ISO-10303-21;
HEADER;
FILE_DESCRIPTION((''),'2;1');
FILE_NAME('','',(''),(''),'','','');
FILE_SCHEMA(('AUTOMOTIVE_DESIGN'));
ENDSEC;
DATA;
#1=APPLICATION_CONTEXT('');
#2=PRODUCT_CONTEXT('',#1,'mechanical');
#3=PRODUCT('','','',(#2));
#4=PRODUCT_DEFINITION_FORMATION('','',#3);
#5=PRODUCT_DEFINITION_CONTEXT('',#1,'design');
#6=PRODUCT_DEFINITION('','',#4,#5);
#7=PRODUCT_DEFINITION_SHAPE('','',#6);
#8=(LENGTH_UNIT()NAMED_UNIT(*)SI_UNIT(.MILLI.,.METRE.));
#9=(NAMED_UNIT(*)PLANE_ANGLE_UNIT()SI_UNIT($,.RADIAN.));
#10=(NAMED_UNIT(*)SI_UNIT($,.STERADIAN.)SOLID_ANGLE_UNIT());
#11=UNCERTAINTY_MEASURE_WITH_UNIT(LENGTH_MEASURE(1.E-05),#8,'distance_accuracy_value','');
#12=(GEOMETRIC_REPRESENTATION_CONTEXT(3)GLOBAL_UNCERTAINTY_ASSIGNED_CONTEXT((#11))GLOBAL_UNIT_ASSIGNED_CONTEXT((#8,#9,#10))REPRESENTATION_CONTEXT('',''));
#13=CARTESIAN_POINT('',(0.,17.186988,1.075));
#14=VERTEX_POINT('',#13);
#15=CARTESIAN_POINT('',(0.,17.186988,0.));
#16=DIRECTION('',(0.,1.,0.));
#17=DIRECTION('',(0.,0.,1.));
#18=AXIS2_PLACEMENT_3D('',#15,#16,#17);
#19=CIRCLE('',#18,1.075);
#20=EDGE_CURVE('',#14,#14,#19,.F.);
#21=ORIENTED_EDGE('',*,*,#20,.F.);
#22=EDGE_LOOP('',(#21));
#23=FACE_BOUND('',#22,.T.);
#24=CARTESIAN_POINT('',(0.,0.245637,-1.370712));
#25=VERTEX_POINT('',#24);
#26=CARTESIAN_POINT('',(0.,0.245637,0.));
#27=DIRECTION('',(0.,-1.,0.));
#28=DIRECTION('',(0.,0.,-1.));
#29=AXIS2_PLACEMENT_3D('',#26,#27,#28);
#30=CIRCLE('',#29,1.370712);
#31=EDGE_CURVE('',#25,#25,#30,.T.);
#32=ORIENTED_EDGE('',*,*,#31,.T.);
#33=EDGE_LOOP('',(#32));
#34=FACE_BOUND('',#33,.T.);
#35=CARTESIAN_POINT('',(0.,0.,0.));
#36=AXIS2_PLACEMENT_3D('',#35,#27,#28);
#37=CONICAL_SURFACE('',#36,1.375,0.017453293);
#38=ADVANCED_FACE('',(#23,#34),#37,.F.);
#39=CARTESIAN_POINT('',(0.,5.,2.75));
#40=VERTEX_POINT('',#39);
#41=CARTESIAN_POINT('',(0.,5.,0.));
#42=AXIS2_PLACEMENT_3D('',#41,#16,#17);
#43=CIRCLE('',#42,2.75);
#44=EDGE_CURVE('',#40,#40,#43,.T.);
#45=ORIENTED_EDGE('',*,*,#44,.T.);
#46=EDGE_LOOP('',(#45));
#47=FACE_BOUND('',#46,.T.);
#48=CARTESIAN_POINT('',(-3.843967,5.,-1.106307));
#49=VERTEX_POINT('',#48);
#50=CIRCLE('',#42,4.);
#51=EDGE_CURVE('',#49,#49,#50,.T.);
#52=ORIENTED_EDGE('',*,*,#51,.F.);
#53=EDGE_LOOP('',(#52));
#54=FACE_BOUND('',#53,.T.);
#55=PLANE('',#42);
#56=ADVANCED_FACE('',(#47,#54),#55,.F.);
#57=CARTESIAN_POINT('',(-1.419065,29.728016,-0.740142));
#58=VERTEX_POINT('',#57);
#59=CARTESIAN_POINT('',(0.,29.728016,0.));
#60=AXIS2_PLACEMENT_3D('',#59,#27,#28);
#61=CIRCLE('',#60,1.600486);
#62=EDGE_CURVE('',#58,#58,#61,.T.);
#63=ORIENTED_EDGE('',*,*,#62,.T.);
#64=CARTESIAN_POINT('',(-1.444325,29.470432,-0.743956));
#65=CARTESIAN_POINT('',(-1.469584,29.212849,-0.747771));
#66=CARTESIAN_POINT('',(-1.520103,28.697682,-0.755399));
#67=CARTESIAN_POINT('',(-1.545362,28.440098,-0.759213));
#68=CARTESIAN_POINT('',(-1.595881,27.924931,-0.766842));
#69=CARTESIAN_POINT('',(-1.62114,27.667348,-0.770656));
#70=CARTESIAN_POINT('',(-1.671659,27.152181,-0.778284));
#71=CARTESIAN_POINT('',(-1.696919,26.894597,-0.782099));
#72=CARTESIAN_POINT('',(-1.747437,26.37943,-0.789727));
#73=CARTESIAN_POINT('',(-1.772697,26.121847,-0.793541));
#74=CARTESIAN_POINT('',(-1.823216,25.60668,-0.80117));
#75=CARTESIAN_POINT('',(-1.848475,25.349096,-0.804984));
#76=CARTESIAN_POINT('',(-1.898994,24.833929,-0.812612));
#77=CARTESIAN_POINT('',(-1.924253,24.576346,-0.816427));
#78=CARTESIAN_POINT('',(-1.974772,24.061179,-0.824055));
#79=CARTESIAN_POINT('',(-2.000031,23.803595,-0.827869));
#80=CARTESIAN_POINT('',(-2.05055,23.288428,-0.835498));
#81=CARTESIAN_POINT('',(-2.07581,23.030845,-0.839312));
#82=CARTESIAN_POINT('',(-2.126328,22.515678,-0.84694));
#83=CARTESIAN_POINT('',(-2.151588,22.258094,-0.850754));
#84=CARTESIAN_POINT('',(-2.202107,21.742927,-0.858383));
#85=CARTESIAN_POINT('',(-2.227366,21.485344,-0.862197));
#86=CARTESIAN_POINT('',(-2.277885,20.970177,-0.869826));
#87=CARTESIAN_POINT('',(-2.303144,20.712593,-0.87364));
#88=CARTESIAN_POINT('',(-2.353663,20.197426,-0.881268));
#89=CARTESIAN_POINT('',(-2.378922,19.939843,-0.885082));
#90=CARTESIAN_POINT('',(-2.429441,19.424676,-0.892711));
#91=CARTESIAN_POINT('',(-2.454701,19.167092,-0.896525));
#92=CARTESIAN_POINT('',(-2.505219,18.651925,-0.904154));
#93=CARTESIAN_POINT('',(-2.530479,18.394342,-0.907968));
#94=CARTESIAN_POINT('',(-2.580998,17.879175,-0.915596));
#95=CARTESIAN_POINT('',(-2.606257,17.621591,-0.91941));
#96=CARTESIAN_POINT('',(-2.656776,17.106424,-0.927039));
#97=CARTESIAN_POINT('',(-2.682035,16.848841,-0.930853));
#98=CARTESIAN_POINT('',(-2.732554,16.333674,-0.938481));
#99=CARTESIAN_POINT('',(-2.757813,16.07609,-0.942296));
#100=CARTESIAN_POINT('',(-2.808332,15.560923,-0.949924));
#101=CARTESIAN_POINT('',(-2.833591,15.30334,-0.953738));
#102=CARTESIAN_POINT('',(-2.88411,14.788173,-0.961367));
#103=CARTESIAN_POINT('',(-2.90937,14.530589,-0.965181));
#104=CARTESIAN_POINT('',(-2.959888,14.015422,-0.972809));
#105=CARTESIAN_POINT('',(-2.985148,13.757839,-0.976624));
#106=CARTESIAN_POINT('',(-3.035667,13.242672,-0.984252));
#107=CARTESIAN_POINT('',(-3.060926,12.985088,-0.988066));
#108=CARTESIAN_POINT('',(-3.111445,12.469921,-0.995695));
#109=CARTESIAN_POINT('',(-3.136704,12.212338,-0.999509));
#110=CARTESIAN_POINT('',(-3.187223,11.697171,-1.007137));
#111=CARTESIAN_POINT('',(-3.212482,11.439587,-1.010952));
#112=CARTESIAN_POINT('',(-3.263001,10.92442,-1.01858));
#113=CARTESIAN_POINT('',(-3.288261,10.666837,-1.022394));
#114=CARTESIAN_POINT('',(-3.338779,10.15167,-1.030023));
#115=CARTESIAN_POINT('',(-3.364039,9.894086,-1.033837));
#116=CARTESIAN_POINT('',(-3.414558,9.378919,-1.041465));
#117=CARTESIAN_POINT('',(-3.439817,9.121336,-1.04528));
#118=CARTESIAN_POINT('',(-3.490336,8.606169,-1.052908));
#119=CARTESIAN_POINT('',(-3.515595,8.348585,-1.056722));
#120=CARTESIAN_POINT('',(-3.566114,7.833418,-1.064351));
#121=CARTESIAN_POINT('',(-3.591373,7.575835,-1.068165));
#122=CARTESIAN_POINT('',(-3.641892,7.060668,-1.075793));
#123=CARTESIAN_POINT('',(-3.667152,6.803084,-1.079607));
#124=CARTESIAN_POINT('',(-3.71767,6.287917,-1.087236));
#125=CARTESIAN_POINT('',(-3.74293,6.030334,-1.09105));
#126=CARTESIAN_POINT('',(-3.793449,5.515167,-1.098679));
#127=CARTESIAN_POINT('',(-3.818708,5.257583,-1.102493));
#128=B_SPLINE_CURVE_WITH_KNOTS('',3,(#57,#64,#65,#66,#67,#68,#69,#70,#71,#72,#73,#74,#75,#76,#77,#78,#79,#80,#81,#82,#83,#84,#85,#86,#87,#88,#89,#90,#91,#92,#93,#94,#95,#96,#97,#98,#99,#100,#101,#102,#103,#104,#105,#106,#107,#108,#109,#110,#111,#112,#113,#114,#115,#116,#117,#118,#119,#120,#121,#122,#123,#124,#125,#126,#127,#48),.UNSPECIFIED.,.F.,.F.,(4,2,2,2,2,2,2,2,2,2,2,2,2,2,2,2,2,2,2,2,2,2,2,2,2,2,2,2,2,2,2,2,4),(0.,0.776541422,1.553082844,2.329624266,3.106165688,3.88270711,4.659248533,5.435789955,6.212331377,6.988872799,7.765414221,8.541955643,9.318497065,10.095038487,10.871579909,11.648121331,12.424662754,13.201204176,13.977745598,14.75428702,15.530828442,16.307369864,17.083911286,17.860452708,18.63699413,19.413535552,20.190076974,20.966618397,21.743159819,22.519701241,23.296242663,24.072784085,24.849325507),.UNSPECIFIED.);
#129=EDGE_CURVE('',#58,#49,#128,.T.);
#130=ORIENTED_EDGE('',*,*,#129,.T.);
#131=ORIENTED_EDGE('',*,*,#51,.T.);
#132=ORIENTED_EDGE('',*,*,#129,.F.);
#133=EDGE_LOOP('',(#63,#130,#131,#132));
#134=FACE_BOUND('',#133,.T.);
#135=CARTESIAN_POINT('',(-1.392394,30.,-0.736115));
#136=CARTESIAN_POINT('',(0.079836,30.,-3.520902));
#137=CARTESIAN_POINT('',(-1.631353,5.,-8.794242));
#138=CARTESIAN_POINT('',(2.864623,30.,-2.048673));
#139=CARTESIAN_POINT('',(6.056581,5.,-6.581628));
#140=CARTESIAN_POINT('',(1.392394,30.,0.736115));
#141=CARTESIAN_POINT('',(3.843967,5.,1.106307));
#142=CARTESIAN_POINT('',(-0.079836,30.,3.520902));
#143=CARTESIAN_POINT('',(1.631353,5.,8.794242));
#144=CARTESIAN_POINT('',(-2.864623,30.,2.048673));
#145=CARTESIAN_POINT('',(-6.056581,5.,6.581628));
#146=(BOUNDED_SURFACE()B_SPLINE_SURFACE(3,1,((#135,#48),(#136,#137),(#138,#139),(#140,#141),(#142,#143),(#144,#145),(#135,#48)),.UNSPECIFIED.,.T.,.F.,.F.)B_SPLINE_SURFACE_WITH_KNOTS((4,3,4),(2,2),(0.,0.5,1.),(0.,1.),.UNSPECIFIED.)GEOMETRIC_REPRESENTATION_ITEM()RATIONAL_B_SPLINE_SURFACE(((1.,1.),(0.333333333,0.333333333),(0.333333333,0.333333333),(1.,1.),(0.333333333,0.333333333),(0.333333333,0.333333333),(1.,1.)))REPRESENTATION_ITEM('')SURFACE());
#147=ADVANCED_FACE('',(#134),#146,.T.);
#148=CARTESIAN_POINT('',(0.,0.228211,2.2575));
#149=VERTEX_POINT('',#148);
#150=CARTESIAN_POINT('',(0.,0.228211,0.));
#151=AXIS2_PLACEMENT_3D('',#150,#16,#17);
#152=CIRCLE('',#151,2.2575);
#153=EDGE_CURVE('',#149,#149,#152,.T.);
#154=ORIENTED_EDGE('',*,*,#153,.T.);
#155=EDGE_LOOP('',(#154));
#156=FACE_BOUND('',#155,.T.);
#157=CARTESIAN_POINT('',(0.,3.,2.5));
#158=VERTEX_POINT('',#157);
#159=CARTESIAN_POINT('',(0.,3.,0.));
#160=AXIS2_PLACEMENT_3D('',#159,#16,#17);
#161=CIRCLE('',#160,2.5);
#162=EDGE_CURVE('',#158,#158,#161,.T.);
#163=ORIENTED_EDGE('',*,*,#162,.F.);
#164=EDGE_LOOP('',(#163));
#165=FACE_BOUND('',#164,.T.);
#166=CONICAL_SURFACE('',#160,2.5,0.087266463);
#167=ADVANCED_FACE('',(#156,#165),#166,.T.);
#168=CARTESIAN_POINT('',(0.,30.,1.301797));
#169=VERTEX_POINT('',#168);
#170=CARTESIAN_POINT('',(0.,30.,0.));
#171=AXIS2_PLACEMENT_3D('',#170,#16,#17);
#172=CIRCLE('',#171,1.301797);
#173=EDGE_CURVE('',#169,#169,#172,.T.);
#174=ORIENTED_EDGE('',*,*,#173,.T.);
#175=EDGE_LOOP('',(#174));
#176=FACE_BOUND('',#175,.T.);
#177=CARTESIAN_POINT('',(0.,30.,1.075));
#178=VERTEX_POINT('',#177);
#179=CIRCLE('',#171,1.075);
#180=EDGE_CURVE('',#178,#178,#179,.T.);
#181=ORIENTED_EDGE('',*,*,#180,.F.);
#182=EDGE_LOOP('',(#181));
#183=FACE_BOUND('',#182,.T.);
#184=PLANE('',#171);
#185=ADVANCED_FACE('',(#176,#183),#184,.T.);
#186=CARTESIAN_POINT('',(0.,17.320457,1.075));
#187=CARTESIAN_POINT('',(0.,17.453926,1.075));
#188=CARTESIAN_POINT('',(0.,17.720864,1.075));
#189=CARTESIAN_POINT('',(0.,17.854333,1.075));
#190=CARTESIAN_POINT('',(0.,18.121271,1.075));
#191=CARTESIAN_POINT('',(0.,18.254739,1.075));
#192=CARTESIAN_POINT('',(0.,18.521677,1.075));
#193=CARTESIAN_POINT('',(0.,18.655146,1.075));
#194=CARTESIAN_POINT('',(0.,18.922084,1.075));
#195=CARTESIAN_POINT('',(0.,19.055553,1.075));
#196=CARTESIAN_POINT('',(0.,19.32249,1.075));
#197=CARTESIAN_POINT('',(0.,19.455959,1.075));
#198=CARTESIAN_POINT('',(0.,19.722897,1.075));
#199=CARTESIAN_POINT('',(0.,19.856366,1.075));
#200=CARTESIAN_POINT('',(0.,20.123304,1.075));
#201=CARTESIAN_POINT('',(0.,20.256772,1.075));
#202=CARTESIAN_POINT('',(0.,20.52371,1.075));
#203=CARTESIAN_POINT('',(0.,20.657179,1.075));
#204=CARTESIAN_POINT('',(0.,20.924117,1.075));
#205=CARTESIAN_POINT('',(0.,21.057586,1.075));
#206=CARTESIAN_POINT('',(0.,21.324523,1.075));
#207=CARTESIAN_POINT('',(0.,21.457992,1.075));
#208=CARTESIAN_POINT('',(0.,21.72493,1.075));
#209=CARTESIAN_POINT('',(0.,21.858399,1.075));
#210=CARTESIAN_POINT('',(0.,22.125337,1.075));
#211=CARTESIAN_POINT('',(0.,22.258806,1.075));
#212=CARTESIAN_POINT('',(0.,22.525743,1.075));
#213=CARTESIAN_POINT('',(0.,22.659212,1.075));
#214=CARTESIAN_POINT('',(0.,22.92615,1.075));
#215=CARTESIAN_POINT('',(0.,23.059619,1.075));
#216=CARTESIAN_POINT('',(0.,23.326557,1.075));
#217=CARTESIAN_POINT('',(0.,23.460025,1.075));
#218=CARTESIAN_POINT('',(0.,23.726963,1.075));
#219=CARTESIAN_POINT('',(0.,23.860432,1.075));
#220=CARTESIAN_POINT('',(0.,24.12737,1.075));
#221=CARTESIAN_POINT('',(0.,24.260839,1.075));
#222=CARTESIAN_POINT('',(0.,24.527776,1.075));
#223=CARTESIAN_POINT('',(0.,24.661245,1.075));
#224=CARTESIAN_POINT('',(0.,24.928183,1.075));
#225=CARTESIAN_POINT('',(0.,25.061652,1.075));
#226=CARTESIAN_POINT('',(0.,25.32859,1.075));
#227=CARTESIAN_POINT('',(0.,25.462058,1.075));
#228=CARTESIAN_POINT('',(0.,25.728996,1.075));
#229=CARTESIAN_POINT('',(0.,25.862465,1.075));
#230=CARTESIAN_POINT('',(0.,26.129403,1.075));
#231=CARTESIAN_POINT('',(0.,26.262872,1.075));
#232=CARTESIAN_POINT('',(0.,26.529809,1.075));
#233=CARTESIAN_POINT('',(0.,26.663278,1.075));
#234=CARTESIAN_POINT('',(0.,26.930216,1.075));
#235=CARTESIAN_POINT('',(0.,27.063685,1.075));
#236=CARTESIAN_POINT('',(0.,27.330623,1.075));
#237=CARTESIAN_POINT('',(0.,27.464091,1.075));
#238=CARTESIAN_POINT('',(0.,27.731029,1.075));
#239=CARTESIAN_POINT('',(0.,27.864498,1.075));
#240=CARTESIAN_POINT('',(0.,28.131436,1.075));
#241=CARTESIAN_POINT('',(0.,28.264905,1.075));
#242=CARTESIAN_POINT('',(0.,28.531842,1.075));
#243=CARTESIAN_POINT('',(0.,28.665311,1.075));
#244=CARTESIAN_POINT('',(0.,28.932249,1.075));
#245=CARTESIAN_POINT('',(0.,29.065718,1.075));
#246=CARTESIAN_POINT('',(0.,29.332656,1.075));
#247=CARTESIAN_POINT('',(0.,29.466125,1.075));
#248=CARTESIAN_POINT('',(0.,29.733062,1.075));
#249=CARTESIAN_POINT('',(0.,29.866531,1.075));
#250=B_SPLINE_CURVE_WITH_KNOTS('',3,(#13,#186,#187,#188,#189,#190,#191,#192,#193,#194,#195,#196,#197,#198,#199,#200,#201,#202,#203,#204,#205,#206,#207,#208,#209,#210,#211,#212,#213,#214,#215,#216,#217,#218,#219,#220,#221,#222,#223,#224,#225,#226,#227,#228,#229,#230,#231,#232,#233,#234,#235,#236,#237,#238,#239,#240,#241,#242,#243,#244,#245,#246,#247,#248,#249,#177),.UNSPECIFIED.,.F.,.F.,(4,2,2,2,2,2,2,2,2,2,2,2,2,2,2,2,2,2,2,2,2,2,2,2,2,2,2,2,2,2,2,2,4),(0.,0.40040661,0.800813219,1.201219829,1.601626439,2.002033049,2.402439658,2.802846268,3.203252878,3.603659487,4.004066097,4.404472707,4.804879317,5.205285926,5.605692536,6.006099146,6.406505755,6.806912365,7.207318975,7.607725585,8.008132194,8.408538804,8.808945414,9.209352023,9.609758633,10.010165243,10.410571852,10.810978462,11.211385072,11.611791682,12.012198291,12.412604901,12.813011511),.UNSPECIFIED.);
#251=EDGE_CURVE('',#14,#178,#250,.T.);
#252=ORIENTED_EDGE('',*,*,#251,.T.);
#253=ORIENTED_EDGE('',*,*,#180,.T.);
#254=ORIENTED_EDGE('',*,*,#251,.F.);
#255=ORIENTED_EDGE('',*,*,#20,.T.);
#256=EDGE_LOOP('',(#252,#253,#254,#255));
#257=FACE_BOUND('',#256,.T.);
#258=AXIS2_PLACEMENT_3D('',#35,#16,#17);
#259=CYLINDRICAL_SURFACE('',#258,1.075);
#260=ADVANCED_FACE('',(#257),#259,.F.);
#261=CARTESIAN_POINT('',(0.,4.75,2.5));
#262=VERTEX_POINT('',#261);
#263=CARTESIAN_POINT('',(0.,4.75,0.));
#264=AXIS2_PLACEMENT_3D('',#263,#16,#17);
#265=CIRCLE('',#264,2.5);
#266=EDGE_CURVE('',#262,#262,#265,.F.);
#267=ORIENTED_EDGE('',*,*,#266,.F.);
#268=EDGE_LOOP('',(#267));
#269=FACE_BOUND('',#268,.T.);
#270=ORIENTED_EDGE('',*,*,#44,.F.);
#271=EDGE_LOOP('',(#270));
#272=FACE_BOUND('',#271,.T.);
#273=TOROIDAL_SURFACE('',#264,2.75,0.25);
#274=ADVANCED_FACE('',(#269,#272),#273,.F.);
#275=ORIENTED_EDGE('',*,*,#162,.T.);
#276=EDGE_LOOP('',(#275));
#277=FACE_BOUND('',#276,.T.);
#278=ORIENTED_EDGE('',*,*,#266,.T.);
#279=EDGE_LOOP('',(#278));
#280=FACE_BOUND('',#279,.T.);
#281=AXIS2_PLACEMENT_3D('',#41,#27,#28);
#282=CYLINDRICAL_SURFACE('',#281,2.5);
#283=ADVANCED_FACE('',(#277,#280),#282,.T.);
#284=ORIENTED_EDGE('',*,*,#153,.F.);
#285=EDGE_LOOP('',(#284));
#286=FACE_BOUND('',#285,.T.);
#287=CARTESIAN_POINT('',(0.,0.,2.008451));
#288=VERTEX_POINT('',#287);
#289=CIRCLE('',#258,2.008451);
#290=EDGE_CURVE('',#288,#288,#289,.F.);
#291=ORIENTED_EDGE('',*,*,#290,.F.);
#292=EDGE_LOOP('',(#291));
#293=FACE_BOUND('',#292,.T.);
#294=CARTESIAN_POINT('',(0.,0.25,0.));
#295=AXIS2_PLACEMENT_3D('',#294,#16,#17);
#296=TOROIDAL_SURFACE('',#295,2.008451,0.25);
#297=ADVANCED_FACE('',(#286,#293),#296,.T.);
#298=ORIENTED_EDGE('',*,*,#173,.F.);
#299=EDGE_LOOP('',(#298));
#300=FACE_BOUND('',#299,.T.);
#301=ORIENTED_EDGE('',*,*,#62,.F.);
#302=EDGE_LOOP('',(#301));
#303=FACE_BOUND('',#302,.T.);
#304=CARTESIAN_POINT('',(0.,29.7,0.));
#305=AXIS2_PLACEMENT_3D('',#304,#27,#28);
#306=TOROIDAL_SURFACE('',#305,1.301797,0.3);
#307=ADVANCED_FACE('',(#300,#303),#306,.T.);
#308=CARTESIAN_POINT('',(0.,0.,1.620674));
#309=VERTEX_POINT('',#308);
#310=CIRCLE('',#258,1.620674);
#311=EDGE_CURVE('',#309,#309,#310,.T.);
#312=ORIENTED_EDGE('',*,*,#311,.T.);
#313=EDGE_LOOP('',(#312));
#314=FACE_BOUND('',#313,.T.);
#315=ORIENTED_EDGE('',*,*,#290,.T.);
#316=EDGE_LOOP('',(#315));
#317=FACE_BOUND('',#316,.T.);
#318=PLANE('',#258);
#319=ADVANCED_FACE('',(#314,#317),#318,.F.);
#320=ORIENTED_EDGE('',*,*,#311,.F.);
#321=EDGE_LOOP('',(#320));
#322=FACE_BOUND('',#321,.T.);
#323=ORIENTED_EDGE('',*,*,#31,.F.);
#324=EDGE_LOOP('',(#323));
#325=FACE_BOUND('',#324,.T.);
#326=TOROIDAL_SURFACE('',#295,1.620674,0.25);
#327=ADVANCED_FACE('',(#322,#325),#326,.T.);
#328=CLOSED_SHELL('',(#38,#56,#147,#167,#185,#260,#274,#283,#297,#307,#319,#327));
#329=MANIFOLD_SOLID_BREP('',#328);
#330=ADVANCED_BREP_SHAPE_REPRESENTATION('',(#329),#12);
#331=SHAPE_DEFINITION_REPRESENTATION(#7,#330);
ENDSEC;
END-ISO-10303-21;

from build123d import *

# Parameters (mm, degrees)
SKETCH1_R           = 2.5
BOSS_EXTRUDE1_DEPTH = 5
SKETCH4_R           = 1.075
CUT_EXTRUDE1_DEPTH  = 31.528675071
CHAMFER1_SIZE       = 0.3
CHAMFER1_SIZE2      = 17.186988489
CHAMFER2_SIZE       = 3
CHAMFER2_SIZE2      = 0.262465991
FILLET1_R           = 0.3
FILLET2_R           = 0.25
FILLET4_R           = 0.25


with BuildPart() as part:
    # Sketch1 → Boss-Extrude1 (new body)
    with BuildSketch(Plane(origin=(0, 0, 0), x_dir=(1, 0, 0), z_dir=(0, 1, 0))):
        with Locations(Location((0, 0, 0), (0, 0, 270))):
            Circle(SKETCH1_R)
    extrude(amount=BOSS_EXTRUDE1_DEPTH)

    # Loft1: read off the stored shape, not the designer's step
    # Loft1: loft between two sections, ruled curve by curve
    loft1_from = [
        Edge.make_bspline([(-1.392393657, 30, -0.736114736), (0.079835815, 30, -3.52090205), (2.864623129, 30, -2.048672577), (1.392393657, 30, 0.736114736), (-0.079835815, 30, 3.52090205), (-2.864623129, 30, 2.048672577), (-1.392393657, 30, -0.736114736)], [0, 0, 0, 0, 0.5, 0.5, 0.5, 1, 1, 1, 1], 3, [1, 0.333333333, 0.333333333, 1, 0.333333333, 0.333333333, 1]),
    ]
    loft1_to = [
        Edge.make_bspline([(-3.843967333, 5, -1.106306985), (-1.631353363, 5, -8.79424165), (6.056581302, 5, -6.581627681), (3.843967333, 5, 1.106306985), (1.631353363, 5, 8.79424165), (-6.056581302, 5, 6.581627681), (-3.843967333, 5, -1.106306985)], [0, 0, 0, 0, 0.5, 0.5, 0.5, 1, 1, 1, 1], 3, [1, 0.333333333, 0.333333333, 1, 0.333333333, 0.333333333, 1]),
    ]
    loft1 = Solid(Shell([*[Face.make_surface_from_curves(loft1_from[k], loft1_to[k]) for k in range(1)], Face(Wire(loft1_from)), Face(Wire(loft1_to))]))
    add(loft1)

    # Sketch4 → Cut-Extrude1 (cut, through all)
    with BuildSketch(Plane(origin=(0, 30, 0), x_dir=(1, 0, 0), z_dir=(0, 1, 0))):
        with Locations(Location((0, 0, 0), (0, 0, 270))):
            Circle(SKETCH4_R)
    extrude(amount=-CUT_EXTRUDE1_DEPTH, mode=Mode.SUBTRACT)

    # Chamfer1
    chamfer1_edges = [part.edges().sort_by_distance(p)[0] for p in [
        (0, 0, -1.075),
    ]]
    chamfer1_side = [part.faces().sort_by_distance(p)[0] for p in [
        (0, 0, -2.429289322),
    ]]
    chamfer(chamfer1_edges, length=CHAMFER1_SIZE, length2=CHAMFER1_SIZE2, reference=chamfer1_side[0])

    # Chamfer2
    chamfer2_edges = [part.edges().sort_by_distance(p)[0] for p in [
        (0, 0, -2.5),
    ]]
    chamfer2_side = [part.faces().sort_by_distance(p)[0] for p in [
        (0, 2.5, -2.5),
    ]]
    chamfer(chamfer2_edges, length=CHAMFER2_SIZE, length2=CHAMFER2_SIZE2, reference=chamfer2_side[0])

    # Fillet1
    fillet1_edges = [part.edges().sort_by_distance(p)[0] for p in [
        (1.392393657, 30, 0.736114736),
    ]]
    fillet(fillet1_edges, radius=FILLET1_R)

    # Fillet2
    fillet2_edges = [part.edges().sort_by_distance(p)[0] for p in [
        (0, 5, -2.5),
    ]]
    fillet(fillet2_edges, radius=FILLET2_R)

    # Fillet4
    fillet4_edges = [part.edges().sort_by_distance(p)[0] for p in [
        (0, 0, -1.375),
        (0, 0, -2.237534009),
    ]]
    fillet(fillet4_edges, radius=FILLET4_R)


solid = part.part
